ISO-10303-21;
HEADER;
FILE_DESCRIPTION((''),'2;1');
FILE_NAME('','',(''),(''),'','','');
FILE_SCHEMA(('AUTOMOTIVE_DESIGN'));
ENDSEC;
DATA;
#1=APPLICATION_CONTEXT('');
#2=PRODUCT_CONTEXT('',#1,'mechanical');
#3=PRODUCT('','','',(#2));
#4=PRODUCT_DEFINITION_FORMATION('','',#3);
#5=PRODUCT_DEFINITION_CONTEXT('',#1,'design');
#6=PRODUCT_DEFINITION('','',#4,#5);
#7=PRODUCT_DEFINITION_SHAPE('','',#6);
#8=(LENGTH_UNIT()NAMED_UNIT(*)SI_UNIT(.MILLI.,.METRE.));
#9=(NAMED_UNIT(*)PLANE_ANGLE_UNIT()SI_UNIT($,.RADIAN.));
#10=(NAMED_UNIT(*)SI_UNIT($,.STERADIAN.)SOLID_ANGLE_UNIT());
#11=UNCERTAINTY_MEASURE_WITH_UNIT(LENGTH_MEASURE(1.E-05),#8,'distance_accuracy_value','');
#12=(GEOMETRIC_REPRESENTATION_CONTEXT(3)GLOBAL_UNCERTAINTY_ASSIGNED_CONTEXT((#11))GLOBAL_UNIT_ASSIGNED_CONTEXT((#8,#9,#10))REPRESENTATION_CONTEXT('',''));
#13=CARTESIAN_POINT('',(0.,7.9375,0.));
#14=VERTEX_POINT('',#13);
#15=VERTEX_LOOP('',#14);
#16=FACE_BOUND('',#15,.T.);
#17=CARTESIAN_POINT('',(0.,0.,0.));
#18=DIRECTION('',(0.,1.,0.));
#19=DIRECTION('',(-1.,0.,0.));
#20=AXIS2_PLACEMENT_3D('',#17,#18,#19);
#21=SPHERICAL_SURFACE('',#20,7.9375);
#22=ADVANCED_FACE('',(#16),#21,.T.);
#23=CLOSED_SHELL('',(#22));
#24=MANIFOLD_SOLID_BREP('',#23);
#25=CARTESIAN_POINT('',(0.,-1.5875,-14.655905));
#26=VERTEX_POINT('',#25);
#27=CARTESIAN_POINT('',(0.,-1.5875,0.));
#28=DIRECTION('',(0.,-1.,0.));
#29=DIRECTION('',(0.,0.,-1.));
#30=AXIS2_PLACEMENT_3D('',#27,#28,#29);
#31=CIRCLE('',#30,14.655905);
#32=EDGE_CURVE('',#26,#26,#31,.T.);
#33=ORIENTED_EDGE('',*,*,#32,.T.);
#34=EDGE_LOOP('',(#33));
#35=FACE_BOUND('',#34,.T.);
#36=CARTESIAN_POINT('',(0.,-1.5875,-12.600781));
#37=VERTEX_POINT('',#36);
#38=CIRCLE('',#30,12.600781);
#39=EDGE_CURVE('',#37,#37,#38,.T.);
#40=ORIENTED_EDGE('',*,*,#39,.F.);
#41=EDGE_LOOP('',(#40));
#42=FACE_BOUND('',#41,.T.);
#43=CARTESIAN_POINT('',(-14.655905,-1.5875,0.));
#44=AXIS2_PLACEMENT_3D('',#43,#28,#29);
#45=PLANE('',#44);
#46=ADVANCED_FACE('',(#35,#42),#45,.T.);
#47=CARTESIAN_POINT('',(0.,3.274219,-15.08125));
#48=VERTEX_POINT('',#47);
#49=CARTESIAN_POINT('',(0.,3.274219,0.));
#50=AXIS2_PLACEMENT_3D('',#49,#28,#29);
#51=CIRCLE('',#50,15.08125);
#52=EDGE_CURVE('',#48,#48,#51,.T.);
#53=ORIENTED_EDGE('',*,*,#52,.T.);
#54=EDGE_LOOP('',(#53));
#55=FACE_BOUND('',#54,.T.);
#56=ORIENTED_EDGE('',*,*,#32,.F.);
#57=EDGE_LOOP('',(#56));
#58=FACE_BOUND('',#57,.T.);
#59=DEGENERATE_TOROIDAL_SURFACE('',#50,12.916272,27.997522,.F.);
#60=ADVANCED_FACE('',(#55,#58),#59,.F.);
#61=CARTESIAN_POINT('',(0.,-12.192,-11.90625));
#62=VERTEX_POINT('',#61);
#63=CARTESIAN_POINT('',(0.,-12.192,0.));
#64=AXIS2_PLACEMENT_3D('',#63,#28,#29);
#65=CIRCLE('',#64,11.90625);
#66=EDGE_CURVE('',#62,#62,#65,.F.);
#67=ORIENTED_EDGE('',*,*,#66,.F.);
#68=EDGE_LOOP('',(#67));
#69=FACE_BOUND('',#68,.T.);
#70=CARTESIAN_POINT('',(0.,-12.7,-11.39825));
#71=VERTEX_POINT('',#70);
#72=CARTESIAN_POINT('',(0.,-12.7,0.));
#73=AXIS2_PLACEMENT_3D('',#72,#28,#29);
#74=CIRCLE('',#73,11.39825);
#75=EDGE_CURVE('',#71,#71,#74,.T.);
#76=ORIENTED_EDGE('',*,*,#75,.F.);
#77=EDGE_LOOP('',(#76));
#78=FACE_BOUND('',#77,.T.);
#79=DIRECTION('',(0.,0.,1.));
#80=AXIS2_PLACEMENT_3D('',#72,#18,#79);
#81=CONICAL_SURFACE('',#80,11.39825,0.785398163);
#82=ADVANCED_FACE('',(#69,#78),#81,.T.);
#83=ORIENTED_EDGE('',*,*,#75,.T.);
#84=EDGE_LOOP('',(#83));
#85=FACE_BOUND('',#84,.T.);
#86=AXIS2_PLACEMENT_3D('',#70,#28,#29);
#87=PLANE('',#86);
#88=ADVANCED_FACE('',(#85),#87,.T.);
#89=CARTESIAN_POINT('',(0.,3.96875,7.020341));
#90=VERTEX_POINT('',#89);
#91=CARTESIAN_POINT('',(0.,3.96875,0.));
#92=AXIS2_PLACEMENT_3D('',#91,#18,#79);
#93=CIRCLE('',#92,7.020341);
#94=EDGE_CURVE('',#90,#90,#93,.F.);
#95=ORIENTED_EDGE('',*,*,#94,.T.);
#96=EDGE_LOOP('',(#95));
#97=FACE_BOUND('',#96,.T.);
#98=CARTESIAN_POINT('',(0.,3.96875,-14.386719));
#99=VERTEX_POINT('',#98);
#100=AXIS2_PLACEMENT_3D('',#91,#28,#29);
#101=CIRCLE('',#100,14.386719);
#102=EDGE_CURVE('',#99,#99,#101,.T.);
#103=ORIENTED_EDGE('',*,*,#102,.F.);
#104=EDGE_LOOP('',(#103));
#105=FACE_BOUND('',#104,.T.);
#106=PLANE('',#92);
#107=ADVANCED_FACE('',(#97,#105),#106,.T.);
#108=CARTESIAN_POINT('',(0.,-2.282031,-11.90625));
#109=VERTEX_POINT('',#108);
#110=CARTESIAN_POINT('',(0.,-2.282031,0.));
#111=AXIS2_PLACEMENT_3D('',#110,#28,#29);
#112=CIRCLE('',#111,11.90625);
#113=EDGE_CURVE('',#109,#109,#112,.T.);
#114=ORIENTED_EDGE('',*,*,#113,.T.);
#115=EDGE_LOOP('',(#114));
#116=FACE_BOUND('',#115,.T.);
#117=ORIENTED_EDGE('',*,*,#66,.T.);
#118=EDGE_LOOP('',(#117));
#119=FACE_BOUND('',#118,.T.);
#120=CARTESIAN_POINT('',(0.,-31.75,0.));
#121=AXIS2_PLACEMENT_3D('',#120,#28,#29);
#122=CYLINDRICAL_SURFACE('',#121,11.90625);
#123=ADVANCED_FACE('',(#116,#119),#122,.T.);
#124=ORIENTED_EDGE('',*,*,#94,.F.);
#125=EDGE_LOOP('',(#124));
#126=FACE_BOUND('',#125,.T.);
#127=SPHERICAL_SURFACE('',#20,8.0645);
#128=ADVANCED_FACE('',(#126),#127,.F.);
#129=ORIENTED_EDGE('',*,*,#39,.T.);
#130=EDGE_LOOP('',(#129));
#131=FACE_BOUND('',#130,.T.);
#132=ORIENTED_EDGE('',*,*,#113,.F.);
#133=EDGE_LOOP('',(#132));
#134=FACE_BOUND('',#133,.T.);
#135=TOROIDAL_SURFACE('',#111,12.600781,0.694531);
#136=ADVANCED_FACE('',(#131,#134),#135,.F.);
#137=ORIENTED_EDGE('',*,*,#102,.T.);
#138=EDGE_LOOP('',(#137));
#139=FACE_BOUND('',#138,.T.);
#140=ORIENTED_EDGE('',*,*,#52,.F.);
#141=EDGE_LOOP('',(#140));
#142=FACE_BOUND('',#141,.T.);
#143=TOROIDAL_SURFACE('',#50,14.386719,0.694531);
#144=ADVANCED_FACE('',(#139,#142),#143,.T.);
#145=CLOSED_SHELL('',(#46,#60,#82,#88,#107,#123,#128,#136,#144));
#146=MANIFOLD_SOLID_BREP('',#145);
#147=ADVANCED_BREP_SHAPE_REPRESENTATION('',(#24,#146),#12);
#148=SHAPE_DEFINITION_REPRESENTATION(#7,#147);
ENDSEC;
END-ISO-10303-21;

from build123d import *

# Parameters (mm, degrees)
MOVE_FACE1_BY      = 0.127
CHAMFER2_SIZE      = 0.508
CHAMFER1_SIZE      = 0.9525
CUT_SWEEP1_PITCH   = 1.27
CUT_SWEEP1_TO      = 19.05
SKETCH7_R          = 5.08
CUT_EXTRUDE1_DEPTH = 19.05


with BuildPart() as part:
    # Sketch1 → Revolve1 (revolve)
    with BuildSketch(Plane.XY, mode=Mode.PRIVATE) as revolve1_sk:
        with BuildLine():
            Line((0, 3.96875), (14.38671875, 3.96875))
            ThreePointArc((14.38671875, 3.96875), (14.877826507, 3.765326507), (15.08125, 3.27421875))
            ThreePointArc((15.08125, 3.27421875), (14.974710974, 0.834073887), (14.655904724, -1.5875))
            Line((14.655904724, -1.5875), (12.60078125, -1.5875))
            ThreePointArc((12.60078125, -1.5875), (12.109673493, -1.790923493), (11.90625, -2.28203125))
            Line((11.90625, -2.28203125), (11.90625, -12.7))
            Line((11.90625, -12.7), (3.175, -12.7))
            Line((3.175, -12.7), (3.175, -31.75))
            Line((3.175, -31.75), (0, -31.75))
            Line((0, -31.75), (0, 3.96875))
        make_face()
    revolve(revolve1_sk.sketch.rotate(Axis((0, -31.75, 0), (0, 1, 0)), 90), axis=Axis((0, -31.75, 0), (0, 1, 0)))

    # Sketch2 → Cut-Revolve1 (revolve, cut)
    with BuildSketch(Plane.XY):
        with BuildLine():
            Line((0, 7.9375), (0, -7.9375))
            ThreePointArc((0, -7.9375), (7.9375, 0), (0, 7.9375))
        make_face()
    revolve(axis=Axis((0, 7.9375, 0), (0, -1, 0)), mode=Mode.SUBTRACT)

    # Move Face1: a curved face moved inward by 0.127
    add(Solid.thicken(part.faces().sort_by_distance((-6.874076643, -3.96875, 0))[0], -MOVE_FACE1_BY), mode=Mode.SUBTRACT)

    # Chamfer2
    chamfer2_edges = [part.edges().sort_by_distance(p)[0] for p in [
        (0, -12.7, 11.90625),
    ]]
    chamfer(chamfer2_edges, length=CHAMFER2_SIZE)

    # Chamfer1
    chamfer1_edges = [part.edges().sort_by_distance(p)[0] for p in [
        (0, -31.75, 3.175),
    ]]
    chamfer(chamfer1_edges, length=CHAMFER1_SIZE)


with BuildPart() as body_2:
    # Sketch2<2> → Revolve2 (revolve)
    with BuildSketch(Plane.XY):
        with BuildLine():
            Line((0, 7.9375), (0, -7.9375))
            ThreePointArc((0, -7.9375), (7.9375, 0), (0, 7.9375))
        make_face()
    revolve(axis=Axis((0, 7.9375, 0), (0, -1, 0)))


with BuildPart() as body_3:
    # Split1: read off the stored shape, not the designer's step
    # Split1: the piece on the far side of the plane
    add(part.part)
    split(bisect_by=Plane(origin=(0, -12.7, 0), x_dir=(1, 0, 0), z_dir=(0, 1, 0)), keep=Keep.BOTTOM)

    # Cut-Sweep1: arcs per turn and ends read off the stored shape
    # Cut-Sweep1: the profile of Sketch4 profile screwed along a right-hand helix through 16 turns, 8 arcs to a turn; built about Z, then put on its axis
    cut_sweep1_z = Axis((0, 0, 0), (0, 0, 1))
    cut_sweep1_corners = [(3.1753, 0, 0.952673205), (3.1753, 0, -0.158923205), (2.350110803, 0, 0.3175), (2.350110803, 0, 0.47625)]
    with BuildLine(mode=Mode.PRIVATE) as cut_sweep1_profile:
        Line(cut_sweep1_corners[0], cut_sweep1_corners[1])
        Line(cut_sweep1_corners[1], cut_sweep1_corners[2])
        Line(cut_sweep1_corners[2], cut_sweep1_corners[3])
        Line(cut_sweep1_corners[3], cut_sweep1_corners[0])
    cut_sweep1_cap = Face(cut_sweep1_profile.wire())
    cut_sweep1_turn_angles = [0, 22.5, 45, 67.5, 90, 112.5, 135, 157.5, 180, 202.5, 225, 247.5, 270, 292.5, 315, 337.5, 360]
    cut_sweep1_turn_weights = [1, 0.9238795325112867, 1, 0.9238795325112867, 1, 0.9238795325112867, 1, 0.9238795325112867, 1, 0.9238795325112867, 1, 0.9238795325112867, 1, 0.9238795325112867, 1, 0.9238795325112867, 1]
    cut_sweep1_turn_rails = [Edge.make_bspline([Vector(p[0], p[1], 0).rotate(cut_sweep1_z, cut_sweep1_turn_angles[k]) / cut_sweep1_turn_weights[k] + Vector(0, 0, p[2] + CUT_SWEEP1_PITCH * cut_sweep1_turn_angles[k] / 360) for k in range(17)], [0, 0, 0, 1, 1, 2, 2, 3, 3, 4, 4, 5, 5, 6, 6, 7, 7, 8, 8, 8], 2, cut_sweep1_turn_weights) for p in cut_sweep1_corners]
    cut_sweep1_turn_sides = [Face.make_surface_from_curves(cut_sweep1_turn_rails[p[0]], cut_sweep1_turn_rails[p[1]]) for p in [(0, 1), (1, 2), (2, 3), (3, 0)]]
    cut_sweep1 = Plane(origin=(0, -31.75, 0), x_dir=(1, 0, 0), z_dir=(0, 1, 0)) * split(Solid(Shell([*[p.moved(Location((0, 0, CUT_SWEEP1_PITCH * i))) for i in range(16) for p in cut_sweep1_turn_sides], cut_sweep1_cap, cut_sweep1_cap.rotate(cut_sweep1_z, 5760).moved(Location((0, 0, CUT_SWEEP1_PITCH * 5760 / 360)))])), bisect_by=Plane.XY.offset(CUT_SWEEP1_TO), keep=Keep.BOTTOM, mode=Mode.PRIVATE)
    add(cut_sweep1, mode=Mode.SUBTRACT)


with BuildPart() as part_1:
    add(part.part)

    # Split1
    split(bisect_by=Plane(origin=(0, -12.7, 0), x_dir=(1, 0, 0), z_dir=(0, 1, 0)), keep=Keep.TOP)

    add(body_3.part)  # Boss-Extrude1 merges body 3
    # Boss-Extrude1: read off the stored shape, not the designer's step
    # Boss-Extrude1 outline → Boss-Extrude1 (revolve)
    with BuildSketch(Plane.XY):
        Polygon((2.350109772, -12.7), (2.350109772, -14.966367275), (3.175, -12.7), align=None)
    revolve(axis=Axis((0, 0, 0), (0, 1, 0)))

    # Sketch7 → Cut-Extrude1 (cut)
    with BuildSketch(Plane.XZ.offset(31.75)):
        Circle(SKETCH7_R)
    extrude(amount=-CUT_EXTRUDE1_DEPTH, mode=Mode.SUBTRACT)


solid = Compound([body_2.part, part_1.part])
